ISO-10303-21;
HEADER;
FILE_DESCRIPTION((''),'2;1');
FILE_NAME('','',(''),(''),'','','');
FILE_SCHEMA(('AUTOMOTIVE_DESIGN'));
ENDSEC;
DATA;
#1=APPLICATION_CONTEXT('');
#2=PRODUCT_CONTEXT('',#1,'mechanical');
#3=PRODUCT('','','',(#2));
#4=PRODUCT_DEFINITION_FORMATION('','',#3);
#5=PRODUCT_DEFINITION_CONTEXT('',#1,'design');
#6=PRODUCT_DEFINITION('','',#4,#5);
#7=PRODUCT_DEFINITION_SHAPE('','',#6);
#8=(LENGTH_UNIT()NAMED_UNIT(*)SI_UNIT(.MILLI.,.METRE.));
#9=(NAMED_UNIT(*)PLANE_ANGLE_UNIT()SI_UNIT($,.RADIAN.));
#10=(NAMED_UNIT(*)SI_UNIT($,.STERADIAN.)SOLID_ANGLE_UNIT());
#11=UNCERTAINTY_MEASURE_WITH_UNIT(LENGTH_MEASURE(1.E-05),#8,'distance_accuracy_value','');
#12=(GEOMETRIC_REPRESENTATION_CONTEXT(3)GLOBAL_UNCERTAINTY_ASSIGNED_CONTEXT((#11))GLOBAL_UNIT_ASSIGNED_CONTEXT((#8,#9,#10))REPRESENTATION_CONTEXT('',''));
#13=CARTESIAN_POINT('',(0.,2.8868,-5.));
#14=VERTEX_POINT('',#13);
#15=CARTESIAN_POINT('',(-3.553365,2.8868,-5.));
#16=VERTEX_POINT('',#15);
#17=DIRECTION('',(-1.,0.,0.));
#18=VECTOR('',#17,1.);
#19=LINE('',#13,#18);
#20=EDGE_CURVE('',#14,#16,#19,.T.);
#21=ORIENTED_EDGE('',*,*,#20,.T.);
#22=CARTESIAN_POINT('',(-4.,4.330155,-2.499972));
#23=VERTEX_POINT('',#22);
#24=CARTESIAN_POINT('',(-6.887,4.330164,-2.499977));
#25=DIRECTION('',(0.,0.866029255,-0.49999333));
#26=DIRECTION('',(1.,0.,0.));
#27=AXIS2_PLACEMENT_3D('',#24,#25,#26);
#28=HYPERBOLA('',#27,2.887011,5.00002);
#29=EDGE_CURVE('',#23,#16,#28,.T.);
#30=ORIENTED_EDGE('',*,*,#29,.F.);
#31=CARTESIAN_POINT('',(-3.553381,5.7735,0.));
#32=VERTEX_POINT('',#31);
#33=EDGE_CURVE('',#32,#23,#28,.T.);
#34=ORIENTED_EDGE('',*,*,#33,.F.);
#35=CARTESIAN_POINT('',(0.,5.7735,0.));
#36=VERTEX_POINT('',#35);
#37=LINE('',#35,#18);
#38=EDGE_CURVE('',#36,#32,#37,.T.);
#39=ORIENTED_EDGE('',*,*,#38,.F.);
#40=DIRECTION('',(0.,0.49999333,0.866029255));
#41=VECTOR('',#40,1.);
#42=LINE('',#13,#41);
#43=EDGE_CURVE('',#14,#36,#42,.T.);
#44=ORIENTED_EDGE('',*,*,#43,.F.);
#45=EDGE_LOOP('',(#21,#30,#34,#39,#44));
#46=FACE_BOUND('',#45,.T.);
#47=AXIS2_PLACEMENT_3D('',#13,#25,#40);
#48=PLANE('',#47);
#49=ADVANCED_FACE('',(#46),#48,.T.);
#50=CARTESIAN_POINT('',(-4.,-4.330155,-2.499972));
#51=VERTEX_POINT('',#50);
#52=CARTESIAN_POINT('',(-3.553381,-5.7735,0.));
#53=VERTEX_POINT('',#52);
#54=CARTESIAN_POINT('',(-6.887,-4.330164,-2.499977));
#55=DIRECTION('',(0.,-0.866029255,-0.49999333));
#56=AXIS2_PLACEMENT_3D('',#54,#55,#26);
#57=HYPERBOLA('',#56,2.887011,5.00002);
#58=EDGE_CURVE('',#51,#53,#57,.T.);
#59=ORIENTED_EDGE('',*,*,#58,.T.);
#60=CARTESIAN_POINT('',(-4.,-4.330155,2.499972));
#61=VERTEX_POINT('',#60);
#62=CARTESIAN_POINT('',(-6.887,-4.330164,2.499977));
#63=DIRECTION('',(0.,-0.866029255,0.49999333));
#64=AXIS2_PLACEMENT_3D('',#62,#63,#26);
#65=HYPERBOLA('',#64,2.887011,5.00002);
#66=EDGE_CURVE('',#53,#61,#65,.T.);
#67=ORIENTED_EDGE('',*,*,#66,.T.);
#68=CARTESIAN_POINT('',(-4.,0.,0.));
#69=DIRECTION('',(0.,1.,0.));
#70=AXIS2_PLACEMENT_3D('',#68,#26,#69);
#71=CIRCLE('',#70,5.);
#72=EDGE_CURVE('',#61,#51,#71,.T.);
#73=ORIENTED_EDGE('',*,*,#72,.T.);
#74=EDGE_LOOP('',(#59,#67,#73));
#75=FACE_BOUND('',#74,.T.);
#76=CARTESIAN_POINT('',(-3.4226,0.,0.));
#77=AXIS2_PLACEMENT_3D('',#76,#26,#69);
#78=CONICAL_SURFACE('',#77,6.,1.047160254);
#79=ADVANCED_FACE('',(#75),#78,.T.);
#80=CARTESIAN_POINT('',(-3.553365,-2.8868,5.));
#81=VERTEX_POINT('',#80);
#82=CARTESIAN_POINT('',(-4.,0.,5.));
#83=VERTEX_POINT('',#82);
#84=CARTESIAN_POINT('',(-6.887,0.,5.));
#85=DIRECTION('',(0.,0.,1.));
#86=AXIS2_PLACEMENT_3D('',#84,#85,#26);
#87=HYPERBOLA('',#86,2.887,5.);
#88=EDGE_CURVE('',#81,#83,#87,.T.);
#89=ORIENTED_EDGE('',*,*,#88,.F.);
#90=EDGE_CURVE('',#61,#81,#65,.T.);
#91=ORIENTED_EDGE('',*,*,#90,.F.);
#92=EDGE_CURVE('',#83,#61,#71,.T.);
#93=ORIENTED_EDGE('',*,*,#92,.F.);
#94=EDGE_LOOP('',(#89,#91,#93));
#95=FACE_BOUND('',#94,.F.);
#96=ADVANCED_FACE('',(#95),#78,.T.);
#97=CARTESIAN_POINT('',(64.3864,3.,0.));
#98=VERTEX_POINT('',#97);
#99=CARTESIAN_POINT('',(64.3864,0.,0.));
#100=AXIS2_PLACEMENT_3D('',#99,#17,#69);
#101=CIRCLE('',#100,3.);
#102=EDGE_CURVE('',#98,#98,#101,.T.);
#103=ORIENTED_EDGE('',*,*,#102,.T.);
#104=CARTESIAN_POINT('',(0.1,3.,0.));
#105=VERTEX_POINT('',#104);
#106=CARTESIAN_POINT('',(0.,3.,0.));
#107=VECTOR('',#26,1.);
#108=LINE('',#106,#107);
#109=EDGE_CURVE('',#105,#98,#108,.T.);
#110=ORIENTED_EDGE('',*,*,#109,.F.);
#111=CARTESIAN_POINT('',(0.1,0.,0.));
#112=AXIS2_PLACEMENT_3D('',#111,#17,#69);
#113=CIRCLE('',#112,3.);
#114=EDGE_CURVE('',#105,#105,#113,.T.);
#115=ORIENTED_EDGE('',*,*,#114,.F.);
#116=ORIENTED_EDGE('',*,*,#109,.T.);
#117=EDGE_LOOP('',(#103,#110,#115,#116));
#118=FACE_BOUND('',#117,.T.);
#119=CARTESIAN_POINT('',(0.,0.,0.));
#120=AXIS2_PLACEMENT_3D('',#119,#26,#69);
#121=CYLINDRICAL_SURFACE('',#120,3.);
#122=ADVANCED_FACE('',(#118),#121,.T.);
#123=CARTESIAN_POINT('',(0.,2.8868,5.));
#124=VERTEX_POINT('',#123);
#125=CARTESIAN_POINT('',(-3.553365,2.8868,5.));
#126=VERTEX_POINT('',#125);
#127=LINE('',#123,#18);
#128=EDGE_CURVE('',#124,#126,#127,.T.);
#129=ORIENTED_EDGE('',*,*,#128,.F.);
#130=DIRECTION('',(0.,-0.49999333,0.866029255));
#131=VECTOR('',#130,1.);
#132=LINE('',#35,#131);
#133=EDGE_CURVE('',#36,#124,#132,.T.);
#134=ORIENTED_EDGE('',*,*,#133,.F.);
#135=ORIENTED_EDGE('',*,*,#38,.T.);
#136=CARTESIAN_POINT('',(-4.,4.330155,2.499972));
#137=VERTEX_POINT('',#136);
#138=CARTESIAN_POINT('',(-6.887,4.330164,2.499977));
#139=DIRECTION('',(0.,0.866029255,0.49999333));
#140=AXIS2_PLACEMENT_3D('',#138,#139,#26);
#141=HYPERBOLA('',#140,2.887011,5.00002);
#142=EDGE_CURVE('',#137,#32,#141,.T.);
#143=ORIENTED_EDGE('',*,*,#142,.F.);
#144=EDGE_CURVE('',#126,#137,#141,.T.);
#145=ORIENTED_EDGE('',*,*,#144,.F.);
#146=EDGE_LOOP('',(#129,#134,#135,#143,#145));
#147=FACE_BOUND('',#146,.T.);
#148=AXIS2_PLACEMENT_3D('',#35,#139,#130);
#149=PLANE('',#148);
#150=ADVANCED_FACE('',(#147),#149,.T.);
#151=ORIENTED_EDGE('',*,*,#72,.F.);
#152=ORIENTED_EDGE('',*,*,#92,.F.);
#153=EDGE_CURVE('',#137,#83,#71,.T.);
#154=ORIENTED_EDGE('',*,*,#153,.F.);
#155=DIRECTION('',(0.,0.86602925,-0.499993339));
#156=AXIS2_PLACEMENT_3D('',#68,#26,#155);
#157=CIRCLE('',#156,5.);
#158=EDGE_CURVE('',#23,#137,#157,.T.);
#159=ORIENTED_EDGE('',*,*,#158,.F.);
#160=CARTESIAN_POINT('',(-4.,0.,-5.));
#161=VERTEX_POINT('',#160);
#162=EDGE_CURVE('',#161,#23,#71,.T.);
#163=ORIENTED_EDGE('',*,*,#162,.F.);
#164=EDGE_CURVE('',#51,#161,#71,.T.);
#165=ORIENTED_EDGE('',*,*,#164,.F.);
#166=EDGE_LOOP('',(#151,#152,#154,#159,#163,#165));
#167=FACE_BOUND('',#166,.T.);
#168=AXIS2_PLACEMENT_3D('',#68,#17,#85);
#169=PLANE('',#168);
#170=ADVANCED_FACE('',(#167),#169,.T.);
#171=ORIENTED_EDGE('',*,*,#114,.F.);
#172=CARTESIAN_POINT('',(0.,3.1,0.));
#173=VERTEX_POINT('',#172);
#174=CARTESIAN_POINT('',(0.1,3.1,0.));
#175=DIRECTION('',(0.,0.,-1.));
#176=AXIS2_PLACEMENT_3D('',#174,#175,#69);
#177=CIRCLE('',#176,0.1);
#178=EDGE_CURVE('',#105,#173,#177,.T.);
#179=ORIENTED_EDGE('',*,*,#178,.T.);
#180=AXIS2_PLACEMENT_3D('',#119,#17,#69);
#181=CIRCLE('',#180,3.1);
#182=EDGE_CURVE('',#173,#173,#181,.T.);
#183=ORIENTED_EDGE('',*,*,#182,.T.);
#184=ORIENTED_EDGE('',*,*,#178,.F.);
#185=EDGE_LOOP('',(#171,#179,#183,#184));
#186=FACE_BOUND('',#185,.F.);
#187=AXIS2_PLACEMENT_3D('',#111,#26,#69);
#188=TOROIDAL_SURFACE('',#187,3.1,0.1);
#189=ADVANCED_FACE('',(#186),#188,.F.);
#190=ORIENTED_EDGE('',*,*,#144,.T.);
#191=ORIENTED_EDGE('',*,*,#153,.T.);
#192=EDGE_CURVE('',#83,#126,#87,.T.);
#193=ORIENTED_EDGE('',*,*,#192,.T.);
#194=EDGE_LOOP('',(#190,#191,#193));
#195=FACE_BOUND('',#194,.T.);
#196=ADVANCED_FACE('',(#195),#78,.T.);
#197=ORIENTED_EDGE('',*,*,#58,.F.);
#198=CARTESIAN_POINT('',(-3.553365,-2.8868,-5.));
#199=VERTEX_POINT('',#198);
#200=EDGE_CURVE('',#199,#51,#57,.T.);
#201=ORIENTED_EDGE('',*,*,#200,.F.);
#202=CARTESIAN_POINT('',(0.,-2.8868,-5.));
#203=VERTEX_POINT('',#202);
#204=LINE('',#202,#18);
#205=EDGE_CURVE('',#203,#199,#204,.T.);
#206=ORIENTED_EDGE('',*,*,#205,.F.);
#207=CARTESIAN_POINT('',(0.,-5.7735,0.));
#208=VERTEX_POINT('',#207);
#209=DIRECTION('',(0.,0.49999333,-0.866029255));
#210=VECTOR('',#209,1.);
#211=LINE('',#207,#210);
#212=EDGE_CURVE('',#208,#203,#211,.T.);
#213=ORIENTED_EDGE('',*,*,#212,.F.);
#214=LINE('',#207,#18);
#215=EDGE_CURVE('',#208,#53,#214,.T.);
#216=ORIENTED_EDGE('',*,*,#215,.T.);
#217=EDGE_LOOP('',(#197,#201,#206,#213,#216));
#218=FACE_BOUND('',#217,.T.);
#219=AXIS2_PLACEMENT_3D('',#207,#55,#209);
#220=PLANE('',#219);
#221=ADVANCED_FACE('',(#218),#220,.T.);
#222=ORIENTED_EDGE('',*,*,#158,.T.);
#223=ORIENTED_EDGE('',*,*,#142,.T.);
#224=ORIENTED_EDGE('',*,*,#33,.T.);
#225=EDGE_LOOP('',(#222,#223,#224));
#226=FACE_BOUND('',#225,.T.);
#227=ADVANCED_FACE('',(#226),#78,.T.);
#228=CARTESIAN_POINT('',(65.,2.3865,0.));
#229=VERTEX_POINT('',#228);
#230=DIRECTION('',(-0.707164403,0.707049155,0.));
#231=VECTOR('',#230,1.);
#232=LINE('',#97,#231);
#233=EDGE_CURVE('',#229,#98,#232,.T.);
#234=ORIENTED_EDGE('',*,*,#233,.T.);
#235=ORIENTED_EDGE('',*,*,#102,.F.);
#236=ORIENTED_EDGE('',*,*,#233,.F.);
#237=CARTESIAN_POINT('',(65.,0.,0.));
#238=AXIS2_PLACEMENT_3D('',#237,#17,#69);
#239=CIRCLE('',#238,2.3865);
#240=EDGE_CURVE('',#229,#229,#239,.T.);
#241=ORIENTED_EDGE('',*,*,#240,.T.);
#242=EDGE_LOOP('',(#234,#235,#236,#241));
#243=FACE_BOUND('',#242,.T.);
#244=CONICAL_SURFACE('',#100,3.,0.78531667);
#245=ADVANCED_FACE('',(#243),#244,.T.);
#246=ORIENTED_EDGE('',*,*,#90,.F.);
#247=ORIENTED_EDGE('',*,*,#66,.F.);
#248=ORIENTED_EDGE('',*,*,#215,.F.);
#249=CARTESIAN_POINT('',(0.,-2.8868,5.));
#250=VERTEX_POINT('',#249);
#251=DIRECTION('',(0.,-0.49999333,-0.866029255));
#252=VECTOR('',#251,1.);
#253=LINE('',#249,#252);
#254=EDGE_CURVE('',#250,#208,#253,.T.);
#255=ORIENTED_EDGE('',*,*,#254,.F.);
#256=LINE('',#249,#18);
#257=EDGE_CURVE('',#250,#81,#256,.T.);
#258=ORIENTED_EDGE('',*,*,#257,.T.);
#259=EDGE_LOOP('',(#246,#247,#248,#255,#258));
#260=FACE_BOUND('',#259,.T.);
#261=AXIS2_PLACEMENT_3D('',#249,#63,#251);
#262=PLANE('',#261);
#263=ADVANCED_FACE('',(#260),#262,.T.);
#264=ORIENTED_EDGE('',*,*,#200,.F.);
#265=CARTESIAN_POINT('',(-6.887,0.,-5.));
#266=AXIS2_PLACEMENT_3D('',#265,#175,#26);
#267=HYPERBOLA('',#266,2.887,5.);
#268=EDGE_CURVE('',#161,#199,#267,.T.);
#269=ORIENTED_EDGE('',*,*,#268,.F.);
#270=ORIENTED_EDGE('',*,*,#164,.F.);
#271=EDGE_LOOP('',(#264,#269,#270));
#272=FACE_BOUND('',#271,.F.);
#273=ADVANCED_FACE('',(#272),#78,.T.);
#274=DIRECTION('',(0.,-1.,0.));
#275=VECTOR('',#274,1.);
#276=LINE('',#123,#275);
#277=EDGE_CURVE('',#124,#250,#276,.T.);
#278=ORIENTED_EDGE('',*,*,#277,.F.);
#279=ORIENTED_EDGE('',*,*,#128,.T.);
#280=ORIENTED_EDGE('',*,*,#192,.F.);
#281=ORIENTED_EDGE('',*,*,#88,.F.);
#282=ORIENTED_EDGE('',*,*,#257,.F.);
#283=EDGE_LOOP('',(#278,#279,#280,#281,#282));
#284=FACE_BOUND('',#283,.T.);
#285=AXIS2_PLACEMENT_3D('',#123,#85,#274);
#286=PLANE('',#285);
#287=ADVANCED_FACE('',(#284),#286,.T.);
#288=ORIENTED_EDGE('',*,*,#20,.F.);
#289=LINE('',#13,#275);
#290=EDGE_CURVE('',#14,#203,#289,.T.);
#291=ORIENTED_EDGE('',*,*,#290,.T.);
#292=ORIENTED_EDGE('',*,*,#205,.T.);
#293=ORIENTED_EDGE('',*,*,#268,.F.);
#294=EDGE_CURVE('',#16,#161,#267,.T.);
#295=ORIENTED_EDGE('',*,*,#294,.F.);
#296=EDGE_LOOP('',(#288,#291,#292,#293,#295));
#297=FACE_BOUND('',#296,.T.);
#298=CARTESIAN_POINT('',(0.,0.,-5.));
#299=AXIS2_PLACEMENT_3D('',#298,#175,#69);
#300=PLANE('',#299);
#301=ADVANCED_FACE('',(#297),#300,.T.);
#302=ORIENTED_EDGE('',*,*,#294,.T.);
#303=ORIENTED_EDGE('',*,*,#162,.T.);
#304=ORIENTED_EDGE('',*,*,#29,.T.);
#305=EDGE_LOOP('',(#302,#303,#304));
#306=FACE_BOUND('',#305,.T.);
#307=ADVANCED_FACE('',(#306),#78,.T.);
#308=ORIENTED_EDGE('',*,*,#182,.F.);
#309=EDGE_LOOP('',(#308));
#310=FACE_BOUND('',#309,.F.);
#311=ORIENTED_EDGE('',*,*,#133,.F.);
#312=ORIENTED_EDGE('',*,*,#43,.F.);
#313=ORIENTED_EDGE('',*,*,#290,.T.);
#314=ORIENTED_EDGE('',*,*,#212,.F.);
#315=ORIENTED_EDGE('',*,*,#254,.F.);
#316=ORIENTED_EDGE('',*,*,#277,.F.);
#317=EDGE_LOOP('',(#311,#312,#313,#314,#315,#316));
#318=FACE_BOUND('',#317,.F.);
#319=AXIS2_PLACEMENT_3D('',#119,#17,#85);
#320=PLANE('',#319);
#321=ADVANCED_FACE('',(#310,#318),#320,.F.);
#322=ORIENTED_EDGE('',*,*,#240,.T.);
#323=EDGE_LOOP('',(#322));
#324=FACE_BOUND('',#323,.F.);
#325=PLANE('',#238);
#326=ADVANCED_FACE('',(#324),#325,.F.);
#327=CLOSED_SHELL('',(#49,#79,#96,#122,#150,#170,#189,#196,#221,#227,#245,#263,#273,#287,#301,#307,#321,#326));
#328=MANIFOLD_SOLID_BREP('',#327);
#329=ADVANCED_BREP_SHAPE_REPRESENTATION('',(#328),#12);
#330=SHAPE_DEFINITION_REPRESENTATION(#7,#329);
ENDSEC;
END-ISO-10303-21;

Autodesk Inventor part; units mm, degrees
ref_plane "YZ Plane" through (0, 0, 0) normal (1, 0, 0) x (0, 1, 0)
ref_plane "XZ Plane" through (0, 0, 0) normal (0, 1, 0) x (-1, 0, 0)
sketch "Эскиз1" plane through (0, 0, 0) normal (0, 0, 1) x (1, 0, 0)
  line L0 (0, 3) -> (65, 3)
  line L1 (65, 3) -> (65, 0)
  line L2 (65, 0) -> (0, 0)
  line L3 (-13, 0) -> (78, 0) projected
  line L4 (0, -0.6) -> (0, 3.6) projected
  line L5 (0, 3) -> (0, 0)
  dimension "d2" = 6
  dimension "d59" = 65
revolve "Базовый элемент" add sketch "Эскиз1" angle 360 about axis through (65, 0, 0) along (-1, 0, 0)
sketch "Эскиз2" plane through (0, 0, 0) normal (-1, 0, 0) x (0, 0, 1)
  line L0 (0, 5.7735) -> (5, 2.8868)
  line L1 (5, 2.8868) -> (5, -2.8868)
  line L2 (5, -2.8868) -> (0, -5.7735)
  line L3 (0, -5.7735) -> (-5, -2.8868)
  line L4 (-5, -2.8868) -> (-5, 2.8868)
  line L5 (-5, 2.8868) -> (0, 5.7735)
  line L6 (-7, 0) -> (7, 0) projected
  line L7 (0, 8.0829) -> (0, -8.0829) projected
  point P0 (0, 0)
  point P1 (0, 0)
  dimension "d11" = 10
extrude "С головкой" add sketch "Эскиз2" along normal blind 4
sketch "Эскиз4" plane through (0, 0, 0) normal (0, 0, 1) x (1, 0, 0)
  line L0 (-3.4226, 6) -> (-4, 5)
  line L1 (-1.1, 0) -> (-0.234, 0)
  line L2 (-4.7532, 0) -> (0.5192, 0) projected
  line L3 (-4, 6) -> (-3.4226, 6)
  line L4 (-4, 5) -> (-4, 6)
  line L5 (0, 7.2) -> (0, -1.2) projected
  dimension "d65" = 10
  dimension "d67" = 30
  dimension "d68" = 12
  dimension "d69" = 4
revolve "Фаска1" cut sketch "Эскиз4" angle 360 about axis through (-1.1, 0, 0) along (1, 0, 0)
thread "Резьба" size "M6x1" class "6g" standard "ISO Metric profile" length 18
chamfer "Фаска2" distance 0.6135 distance2 0.6136 1 edges at (65, -3, 0) measured on face at (65, -0.7485, 0.6631)
fillet "Fillet2" radius 0.1 1 edges at (0, -3, 0)
ref_plane "Work Plane1" through (1.525, 0, 0) normal (0, 0, 1) x (1, 0, 0)
equation "\"d71\" = RR"
equation "\"d11\" = SW"
equation "\"d3\" = KOH"
equation "\"d15\" = GEL"
equation "\"d6\" = -0.5 * SPD + 0.5 * GD"
equation "\"d2\" = GD"
equation "\"d59\" = NLG"
equation "\"d65\" = SW"
equation "\"d67\" = ANG1"
equation "\"d68\" = 1.2 * SW"
equation "\"d69\" = KOH"
equation "\"NLG\" = 65"
equation "\"GD\" = 6"
equation "\"BDM\" = 6"
equation "\"KOH\" = 4"
equation "\"GEL\" = 18"
equation "\"SW\" = 10"
equation "\"SW0\" = 9"
equation "\"SPD\" = NND - 1.2269 * PTC"
equation "\"SD2\" = 6"
equation "\"SD\" = 0"
equation "\"ANG1\" = 30deg"
equation "\"GAL\" = 0.61345 * PTC"
equation "\"GUL\" = 0.61345 * PTC"
equation "\"RR\" = 0.1"
equation "\"RR1\" = 0.1"
equation "\"GD1\" = THREADDIA - 1.2269 * PTC"
equation "\"THREADDIA\" = 6"
equation "\"TOA\" = 30deg"
equation "\"PTC\" = 1"
equation "\"NND\" = 6"
equation "\"E0\" = 1.155 * SW"
properties part number "Болт M6-6gx65 ГОСТ 7805-70" material "Сталь, мягкая"
